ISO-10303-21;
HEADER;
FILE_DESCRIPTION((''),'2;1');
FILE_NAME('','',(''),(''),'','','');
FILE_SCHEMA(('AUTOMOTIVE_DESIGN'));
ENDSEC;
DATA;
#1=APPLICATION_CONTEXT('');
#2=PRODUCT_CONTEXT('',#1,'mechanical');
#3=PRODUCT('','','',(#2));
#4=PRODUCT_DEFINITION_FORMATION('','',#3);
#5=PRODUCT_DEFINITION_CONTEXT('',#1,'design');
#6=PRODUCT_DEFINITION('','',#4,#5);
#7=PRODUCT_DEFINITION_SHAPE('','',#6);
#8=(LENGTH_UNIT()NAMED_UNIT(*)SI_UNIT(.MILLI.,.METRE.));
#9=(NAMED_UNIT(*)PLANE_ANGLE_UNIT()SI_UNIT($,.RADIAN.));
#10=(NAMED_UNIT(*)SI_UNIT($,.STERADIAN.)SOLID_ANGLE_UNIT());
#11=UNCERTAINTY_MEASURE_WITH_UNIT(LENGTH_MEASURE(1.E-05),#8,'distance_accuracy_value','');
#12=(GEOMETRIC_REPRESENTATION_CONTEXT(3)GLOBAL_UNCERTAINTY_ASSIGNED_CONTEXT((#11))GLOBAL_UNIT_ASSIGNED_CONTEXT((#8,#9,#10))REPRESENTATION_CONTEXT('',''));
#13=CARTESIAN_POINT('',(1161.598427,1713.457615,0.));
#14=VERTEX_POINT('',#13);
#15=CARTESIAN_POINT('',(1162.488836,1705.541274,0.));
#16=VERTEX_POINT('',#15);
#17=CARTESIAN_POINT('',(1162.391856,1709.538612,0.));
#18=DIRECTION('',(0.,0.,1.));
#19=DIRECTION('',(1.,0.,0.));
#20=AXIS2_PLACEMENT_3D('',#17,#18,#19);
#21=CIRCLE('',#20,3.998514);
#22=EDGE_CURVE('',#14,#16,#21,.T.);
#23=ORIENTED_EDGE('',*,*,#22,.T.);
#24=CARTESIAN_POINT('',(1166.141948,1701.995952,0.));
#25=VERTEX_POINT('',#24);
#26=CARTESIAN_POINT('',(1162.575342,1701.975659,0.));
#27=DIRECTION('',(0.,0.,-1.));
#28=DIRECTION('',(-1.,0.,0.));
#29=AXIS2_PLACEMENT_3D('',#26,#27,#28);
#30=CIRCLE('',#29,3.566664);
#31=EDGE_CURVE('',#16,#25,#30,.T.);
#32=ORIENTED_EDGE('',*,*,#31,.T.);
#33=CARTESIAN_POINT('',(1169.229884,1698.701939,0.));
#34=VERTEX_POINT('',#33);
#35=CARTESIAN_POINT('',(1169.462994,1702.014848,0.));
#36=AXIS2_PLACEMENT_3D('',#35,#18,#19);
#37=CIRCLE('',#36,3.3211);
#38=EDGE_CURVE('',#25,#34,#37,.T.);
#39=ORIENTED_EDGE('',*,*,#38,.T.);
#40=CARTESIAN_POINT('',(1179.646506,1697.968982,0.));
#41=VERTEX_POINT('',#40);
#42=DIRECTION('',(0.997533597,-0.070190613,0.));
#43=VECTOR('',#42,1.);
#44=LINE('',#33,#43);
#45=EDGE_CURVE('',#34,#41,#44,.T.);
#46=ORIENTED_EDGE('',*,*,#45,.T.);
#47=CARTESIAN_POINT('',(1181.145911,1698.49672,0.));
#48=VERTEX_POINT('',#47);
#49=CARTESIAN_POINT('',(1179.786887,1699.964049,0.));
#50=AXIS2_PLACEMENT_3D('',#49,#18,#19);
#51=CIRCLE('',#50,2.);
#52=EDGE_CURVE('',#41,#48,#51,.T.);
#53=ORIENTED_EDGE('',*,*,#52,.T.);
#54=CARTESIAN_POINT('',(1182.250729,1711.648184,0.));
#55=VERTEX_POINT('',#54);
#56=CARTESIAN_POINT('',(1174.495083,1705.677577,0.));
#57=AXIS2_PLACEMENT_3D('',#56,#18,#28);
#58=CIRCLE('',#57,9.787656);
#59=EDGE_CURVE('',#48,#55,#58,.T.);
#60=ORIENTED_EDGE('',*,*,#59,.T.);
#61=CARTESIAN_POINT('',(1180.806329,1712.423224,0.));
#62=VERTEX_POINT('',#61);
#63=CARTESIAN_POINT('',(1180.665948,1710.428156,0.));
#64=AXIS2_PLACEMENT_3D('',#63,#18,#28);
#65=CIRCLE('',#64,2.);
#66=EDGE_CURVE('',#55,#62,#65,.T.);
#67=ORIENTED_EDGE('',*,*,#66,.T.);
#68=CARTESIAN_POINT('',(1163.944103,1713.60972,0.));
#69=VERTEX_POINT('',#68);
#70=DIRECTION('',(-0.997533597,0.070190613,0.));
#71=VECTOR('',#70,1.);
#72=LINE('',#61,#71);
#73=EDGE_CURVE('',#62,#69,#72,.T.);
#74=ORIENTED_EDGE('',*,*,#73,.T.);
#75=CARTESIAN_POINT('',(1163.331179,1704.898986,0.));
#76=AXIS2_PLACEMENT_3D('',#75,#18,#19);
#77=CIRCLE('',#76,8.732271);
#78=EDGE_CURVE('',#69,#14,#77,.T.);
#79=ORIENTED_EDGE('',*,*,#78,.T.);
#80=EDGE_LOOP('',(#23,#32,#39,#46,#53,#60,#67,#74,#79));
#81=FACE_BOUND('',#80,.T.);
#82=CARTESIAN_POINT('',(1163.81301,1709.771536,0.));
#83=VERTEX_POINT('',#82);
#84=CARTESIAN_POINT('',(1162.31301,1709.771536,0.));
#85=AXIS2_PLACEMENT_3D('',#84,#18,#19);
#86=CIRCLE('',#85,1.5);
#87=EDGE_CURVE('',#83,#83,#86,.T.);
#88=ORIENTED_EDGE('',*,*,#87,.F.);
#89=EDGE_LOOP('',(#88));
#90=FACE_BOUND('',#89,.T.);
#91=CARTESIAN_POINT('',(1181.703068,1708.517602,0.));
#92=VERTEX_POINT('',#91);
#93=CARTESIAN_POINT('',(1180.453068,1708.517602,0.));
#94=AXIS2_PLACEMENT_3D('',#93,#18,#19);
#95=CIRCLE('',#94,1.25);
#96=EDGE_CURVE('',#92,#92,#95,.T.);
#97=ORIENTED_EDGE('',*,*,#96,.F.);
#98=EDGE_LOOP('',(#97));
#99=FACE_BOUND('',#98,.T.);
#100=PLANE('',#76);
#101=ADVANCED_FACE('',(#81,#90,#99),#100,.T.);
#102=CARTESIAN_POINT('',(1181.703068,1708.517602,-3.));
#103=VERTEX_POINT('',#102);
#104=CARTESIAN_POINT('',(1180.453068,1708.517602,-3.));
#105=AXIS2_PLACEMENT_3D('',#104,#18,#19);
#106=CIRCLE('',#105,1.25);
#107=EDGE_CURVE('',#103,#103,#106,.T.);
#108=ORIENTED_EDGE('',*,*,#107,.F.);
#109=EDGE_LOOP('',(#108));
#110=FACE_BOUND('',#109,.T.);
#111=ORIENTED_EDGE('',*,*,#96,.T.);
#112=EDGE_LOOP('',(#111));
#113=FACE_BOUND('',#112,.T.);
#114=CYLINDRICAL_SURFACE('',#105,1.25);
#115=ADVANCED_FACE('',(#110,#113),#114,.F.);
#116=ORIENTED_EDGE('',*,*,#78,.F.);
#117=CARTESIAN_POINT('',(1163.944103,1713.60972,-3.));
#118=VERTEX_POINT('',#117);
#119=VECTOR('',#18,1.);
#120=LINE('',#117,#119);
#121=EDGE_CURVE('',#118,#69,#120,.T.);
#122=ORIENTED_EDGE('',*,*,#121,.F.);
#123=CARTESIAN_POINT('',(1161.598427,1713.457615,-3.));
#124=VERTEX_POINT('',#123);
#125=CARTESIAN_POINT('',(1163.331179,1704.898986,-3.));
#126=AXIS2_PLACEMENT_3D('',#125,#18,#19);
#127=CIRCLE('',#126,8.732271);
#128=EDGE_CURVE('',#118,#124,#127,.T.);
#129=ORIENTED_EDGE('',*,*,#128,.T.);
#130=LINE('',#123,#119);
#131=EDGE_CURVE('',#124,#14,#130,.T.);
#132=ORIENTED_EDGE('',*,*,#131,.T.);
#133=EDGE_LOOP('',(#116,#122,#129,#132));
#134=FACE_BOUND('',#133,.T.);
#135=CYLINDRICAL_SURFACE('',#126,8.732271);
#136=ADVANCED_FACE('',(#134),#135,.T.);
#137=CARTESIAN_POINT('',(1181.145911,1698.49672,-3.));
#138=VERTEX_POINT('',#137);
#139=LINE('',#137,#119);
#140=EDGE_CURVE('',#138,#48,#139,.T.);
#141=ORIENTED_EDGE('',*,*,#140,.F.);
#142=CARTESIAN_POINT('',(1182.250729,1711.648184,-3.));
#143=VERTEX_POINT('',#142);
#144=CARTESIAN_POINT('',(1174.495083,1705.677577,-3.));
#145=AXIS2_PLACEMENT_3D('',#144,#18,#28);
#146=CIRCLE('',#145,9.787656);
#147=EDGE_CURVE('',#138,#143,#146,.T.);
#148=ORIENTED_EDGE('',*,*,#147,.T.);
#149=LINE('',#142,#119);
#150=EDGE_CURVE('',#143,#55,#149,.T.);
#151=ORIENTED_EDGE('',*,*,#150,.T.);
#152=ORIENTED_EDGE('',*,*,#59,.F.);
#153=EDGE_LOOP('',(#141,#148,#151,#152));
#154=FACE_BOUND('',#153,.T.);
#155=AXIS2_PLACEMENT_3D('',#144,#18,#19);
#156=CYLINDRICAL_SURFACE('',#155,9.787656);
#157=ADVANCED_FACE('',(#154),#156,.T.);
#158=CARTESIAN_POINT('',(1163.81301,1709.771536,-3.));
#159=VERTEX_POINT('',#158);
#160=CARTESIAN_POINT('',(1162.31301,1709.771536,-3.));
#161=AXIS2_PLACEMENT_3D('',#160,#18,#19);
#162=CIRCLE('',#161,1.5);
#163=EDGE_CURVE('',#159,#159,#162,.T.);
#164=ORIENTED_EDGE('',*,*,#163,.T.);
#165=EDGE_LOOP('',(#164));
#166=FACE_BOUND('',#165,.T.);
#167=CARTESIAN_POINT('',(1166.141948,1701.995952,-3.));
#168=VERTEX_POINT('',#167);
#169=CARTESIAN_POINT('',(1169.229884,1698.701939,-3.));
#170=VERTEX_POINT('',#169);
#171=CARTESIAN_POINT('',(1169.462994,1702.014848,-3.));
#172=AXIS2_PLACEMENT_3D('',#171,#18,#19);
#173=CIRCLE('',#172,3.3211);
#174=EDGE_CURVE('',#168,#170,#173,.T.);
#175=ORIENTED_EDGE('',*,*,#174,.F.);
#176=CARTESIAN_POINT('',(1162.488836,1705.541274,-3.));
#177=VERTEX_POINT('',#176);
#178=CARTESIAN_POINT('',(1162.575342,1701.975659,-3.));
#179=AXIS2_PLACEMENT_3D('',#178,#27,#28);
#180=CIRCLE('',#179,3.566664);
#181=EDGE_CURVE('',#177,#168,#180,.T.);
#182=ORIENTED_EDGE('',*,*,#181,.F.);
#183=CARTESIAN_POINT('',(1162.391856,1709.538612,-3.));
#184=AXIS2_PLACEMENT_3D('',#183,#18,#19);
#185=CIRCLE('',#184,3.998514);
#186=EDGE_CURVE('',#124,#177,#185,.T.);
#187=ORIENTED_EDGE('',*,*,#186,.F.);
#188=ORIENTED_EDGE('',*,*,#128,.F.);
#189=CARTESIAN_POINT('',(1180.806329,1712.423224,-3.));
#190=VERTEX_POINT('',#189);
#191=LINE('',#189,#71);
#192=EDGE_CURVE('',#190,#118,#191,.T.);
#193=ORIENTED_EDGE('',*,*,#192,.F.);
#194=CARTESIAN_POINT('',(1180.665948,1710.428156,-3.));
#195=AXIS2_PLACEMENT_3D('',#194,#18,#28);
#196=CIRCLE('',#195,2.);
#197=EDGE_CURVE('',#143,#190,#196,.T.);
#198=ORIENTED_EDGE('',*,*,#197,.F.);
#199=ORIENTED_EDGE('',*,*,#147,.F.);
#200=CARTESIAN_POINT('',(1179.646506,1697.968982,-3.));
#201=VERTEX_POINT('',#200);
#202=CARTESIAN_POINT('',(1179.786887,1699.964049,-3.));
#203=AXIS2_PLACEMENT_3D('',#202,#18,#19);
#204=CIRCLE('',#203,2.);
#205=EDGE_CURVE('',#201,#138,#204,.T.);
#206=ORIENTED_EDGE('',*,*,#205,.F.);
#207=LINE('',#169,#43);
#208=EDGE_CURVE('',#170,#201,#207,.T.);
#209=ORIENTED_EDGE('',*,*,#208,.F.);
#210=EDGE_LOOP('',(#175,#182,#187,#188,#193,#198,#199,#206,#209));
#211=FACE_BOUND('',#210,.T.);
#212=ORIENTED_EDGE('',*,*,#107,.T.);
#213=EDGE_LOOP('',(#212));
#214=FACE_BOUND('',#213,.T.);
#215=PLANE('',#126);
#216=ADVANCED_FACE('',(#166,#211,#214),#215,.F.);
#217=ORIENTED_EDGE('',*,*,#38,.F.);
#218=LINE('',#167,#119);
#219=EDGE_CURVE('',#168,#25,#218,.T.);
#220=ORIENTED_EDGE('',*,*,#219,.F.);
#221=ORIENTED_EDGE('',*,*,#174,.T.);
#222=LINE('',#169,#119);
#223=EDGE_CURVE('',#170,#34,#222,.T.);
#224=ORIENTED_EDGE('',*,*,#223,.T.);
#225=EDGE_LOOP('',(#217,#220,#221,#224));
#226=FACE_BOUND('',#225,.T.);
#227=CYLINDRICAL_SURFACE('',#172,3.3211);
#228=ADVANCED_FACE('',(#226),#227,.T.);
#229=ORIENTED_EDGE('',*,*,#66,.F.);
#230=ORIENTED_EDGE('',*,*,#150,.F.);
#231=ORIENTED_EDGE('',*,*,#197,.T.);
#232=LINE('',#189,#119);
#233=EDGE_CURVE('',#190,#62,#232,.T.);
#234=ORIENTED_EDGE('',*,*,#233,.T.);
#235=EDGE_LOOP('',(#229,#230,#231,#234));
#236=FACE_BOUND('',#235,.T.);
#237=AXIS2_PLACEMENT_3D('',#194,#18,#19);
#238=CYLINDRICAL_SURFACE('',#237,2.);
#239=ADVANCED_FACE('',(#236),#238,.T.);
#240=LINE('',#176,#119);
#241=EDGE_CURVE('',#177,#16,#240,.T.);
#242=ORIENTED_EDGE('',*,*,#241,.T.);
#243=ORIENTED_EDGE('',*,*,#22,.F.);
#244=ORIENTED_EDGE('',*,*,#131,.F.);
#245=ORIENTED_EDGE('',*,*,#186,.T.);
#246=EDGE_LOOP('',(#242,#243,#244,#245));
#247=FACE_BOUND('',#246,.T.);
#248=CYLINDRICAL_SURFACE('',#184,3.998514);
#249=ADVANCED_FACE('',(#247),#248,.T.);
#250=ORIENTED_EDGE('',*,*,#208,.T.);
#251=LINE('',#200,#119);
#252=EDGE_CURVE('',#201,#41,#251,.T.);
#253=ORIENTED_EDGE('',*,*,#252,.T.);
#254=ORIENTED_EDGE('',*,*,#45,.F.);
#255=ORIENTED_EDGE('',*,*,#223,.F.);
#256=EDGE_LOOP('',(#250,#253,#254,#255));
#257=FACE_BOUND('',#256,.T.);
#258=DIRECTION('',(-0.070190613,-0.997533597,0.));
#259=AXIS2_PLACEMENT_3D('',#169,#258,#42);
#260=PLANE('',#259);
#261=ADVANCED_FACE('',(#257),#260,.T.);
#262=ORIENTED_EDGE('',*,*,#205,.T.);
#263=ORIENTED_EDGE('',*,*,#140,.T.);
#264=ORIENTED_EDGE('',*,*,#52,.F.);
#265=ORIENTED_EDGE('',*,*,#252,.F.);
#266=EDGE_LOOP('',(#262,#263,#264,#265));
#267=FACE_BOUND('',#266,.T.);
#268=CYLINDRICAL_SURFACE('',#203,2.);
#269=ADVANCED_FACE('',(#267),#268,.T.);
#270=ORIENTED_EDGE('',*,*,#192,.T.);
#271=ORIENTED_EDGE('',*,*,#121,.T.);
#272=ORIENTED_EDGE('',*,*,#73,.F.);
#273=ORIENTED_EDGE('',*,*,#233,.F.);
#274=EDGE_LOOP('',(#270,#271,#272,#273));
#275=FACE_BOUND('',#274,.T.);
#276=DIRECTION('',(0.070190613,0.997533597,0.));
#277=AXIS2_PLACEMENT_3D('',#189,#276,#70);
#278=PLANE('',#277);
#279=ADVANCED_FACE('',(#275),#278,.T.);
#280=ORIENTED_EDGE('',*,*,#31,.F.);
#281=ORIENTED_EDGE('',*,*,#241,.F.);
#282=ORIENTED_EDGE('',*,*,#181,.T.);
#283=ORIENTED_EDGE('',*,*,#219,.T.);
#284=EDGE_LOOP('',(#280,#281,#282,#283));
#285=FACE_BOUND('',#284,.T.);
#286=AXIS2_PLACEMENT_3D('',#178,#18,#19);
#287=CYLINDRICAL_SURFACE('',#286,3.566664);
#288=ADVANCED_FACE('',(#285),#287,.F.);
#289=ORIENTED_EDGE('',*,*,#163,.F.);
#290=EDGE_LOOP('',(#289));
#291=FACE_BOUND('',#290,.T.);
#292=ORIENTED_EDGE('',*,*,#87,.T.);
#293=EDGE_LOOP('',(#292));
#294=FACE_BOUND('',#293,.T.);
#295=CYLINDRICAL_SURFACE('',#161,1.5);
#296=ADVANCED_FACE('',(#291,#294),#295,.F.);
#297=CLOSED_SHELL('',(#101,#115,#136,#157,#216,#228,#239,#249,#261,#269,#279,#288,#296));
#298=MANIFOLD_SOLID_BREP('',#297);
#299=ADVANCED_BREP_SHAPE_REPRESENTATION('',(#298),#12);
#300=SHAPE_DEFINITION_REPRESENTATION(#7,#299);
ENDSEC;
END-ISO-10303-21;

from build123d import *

# Parameters (mm, degrees)
ESQUISSE1_R               = 1.5
ESQUISSE1_R_2             = 1.25
T_LE_DE_BASE_PLI_E1_DEPTH = 3


# Sheet-metal steps are written as plain solids
with BuildPart() as part:
    # Esquisse1 → Tôle de base pliée1 (new body)
    with BuildSketch(Plane.XY):
        with BuildLine():
            Line((1180.806329324, 1712.423223535), (1163.94410285, 1713.60971993))
            ThreePointArc((1163.94410285, 1713.60971993), (1162.76612345, 1713.612955968), (1161.59842695, 1713.457614973))
            ThreePointArc((1161.59842695, 1713.457614973), (1158.418396897, 1709.091687704), (1162.488835778, 1705.54127373))
            ThreePointArc((1162.488835778, 1705.54127373), (1165.059310496, 1704.535149371), (1166.141947966, 1701.995952134))
            ThreePointArc((1166.141947966, 1701.995952134), (1167.040054527, 1699.743489734), (1169.229884323, 1698.701939096))
            Line((1169.229884323, 1698.701939096), (1179.646505762, 1697.968982283))
            ThreePointArc((1179.646505762, 1697.968982283), (1180.450889379, 1698.077491546), (1181.145910596, 1698.496720327))
            ThreePointArc((1181.145910596, 1698.496720327), (1184.248383676, 1704.858228491), (1182.250729268, 1711.648184471))
            ThreePointArc((1182.250729268, 1711.648184471), (1181.611578951, 1712.190479321), (1180.806329324, 1712.423223535))
        make_face()
        with Locations((1162.31301042, 1709.771535786)):
            Circle(ESQUISSE1_R, mode=Mode.SUBTRACT)
        with Locations((1180.453067935, 1708.517601578)):
            Circle(ESQUISSE1_R_2, mode=Mode.SUBTRACT)
    extrude(amount=-T_LE_DE_BASE_PLI_E1_DEPTH)


solid = part.part
